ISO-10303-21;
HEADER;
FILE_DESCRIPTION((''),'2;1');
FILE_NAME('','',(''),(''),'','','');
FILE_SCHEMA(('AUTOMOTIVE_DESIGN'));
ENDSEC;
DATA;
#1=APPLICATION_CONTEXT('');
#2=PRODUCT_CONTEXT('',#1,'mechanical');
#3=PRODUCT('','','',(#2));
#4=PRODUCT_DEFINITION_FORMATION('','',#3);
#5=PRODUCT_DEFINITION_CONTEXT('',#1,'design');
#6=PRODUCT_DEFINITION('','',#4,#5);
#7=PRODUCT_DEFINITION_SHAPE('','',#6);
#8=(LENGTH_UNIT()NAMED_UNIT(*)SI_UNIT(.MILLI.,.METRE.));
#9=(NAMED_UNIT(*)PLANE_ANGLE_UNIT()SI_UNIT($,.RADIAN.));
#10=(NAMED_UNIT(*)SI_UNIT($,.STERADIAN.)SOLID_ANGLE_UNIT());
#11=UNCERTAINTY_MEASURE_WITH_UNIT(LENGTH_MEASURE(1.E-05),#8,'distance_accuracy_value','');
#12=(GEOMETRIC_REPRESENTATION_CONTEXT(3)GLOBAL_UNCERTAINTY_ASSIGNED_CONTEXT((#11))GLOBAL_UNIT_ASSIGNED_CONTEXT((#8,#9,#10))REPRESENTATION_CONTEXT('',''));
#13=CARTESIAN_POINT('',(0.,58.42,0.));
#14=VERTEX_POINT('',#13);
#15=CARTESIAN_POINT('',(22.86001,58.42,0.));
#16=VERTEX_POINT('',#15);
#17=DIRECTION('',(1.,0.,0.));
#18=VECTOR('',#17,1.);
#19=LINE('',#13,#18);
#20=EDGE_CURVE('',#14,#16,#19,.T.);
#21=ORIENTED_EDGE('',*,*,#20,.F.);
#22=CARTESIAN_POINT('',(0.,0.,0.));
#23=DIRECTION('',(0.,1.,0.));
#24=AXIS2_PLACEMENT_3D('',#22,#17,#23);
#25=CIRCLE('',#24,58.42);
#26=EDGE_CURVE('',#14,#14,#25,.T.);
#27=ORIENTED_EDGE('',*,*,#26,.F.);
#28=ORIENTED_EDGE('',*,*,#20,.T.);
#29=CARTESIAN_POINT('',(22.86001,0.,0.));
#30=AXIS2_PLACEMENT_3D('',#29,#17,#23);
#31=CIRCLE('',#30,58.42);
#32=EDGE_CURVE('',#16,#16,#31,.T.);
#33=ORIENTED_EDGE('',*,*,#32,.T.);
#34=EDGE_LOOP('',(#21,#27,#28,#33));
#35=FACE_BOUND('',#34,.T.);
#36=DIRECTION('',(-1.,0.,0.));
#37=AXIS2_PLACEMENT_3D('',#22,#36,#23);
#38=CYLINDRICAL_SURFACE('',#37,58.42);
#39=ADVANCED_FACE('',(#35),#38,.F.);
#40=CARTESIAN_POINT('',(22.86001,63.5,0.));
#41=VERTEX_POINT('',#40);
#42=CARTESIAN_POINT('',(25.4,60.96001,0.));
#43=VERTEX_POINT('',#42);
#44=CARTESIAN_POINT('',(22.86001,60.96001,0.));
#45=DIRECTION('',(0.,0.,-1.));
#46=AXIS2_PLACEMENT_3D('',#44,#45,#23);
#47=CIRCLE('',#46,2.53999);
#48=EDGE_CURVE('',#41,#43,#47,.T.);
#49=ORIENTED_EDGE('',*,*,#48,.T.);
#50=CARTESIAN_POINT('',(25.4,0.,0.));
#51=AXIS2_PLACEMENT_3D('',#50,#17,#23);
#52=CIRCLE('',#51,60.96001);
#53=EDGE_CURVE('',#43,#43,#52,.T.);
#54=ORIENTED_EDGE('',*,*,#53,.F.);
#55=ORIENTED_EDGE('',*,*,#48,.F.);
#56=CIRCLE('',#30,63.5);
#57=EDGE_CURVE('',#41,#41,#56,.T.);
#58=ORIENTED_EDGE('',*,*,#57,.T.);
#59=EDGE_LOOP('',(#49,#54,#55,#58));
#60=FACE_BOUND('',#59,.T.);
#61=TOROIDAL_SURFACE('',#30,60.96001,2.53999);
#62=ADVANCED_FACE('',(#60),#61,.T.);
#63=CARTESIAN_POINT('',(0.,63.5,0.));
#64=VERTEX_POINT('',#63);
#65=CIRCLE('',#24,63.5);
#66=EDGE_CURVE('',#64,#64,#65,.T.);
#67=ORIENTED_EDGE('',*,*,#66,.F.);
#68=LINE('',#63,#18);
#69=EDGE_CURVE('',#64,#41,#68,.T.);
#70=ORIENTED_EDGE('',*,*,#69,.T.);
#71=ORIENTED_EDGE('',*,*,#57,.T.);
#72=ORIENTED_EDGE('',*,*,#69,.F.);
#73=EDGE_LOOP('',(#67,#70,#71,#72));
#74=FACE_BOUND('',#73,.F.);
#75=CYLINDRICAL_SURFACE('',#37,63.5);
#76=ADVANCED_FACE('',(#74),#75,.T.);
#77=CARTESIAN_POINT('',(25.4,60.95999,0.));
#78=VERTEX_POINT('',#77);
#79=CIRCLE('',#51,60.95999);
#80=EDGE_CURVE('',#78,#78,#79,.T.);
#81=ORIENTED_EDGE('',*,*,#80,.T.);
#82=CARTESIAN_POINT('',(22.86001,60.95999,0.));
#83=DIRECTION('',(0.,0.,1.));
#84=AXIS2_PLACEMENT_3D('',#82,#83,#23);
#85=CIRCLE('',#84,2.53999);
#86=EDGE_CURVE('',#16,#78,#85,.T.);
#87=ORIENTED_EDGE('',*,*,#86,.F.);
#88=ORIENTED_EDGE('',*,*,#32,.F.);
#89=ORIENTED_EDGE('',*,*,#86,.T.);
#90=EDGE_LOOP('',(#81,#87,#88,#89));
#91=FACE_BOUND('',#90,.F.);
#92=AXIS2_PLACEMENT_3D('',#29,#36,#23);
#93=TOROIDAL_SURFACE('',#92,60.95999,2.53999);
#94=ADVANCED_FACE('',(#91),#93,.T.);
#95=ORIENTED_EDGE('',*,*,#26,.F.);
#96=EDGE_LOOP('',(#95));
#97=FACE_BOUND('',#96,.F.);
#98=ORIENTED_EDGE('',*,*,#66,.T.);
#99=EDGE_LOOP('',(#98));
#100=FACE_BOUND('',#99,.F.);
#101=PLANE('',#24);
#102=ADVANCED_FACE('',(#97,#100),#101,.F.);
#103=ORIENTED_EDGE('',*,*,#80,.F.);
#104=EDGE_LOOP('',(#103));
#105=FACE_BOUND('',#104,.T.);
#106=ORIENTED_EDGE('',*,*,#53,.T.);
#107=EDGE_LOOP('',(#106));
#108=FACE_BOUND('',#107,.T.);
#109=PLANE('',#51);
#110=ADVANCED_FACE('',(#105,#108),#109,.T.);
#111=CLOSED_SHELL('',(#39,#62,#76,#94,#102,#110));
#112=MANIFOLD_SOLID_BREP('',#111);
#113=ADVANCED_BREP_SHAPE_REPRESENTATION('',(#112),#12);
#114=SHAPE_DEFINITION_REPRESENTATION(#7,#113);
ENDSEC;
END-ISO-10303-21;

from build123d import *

# Parameters (mm, degrees)
F0_R     = 63.5
F0_R_2   = 58.42
F1_DEPTH = 25.4
F2_R     = 2.53999


# Not quite as in the source:
# - a fillet or chamfer is up to 0.001 mm smaller than in the source, because OpenCascade refuses the exact size


with BuildPart() as f1:
    # F0 (on Right) → F1 (new body)
    with BuildSketch(Plane.YZ):
        Circle(F0_R)
        Circle(F0_R_2, mode=Mode.SUBTRACT)
    extrude(amount=F1_DEPTH)

    # F2 (radius 2.54 in the source; OpenCascade refuses exactly that, so slightly less here)
    f2_edges = [f1.edges().sort_by_distance(p)[0] for p in [
        (25.4, -58.42, 0),
        (25.4, -63.5, 0),
    ]]
    fillet(f2_edges, radius=F2_R)


solid = f1.part
